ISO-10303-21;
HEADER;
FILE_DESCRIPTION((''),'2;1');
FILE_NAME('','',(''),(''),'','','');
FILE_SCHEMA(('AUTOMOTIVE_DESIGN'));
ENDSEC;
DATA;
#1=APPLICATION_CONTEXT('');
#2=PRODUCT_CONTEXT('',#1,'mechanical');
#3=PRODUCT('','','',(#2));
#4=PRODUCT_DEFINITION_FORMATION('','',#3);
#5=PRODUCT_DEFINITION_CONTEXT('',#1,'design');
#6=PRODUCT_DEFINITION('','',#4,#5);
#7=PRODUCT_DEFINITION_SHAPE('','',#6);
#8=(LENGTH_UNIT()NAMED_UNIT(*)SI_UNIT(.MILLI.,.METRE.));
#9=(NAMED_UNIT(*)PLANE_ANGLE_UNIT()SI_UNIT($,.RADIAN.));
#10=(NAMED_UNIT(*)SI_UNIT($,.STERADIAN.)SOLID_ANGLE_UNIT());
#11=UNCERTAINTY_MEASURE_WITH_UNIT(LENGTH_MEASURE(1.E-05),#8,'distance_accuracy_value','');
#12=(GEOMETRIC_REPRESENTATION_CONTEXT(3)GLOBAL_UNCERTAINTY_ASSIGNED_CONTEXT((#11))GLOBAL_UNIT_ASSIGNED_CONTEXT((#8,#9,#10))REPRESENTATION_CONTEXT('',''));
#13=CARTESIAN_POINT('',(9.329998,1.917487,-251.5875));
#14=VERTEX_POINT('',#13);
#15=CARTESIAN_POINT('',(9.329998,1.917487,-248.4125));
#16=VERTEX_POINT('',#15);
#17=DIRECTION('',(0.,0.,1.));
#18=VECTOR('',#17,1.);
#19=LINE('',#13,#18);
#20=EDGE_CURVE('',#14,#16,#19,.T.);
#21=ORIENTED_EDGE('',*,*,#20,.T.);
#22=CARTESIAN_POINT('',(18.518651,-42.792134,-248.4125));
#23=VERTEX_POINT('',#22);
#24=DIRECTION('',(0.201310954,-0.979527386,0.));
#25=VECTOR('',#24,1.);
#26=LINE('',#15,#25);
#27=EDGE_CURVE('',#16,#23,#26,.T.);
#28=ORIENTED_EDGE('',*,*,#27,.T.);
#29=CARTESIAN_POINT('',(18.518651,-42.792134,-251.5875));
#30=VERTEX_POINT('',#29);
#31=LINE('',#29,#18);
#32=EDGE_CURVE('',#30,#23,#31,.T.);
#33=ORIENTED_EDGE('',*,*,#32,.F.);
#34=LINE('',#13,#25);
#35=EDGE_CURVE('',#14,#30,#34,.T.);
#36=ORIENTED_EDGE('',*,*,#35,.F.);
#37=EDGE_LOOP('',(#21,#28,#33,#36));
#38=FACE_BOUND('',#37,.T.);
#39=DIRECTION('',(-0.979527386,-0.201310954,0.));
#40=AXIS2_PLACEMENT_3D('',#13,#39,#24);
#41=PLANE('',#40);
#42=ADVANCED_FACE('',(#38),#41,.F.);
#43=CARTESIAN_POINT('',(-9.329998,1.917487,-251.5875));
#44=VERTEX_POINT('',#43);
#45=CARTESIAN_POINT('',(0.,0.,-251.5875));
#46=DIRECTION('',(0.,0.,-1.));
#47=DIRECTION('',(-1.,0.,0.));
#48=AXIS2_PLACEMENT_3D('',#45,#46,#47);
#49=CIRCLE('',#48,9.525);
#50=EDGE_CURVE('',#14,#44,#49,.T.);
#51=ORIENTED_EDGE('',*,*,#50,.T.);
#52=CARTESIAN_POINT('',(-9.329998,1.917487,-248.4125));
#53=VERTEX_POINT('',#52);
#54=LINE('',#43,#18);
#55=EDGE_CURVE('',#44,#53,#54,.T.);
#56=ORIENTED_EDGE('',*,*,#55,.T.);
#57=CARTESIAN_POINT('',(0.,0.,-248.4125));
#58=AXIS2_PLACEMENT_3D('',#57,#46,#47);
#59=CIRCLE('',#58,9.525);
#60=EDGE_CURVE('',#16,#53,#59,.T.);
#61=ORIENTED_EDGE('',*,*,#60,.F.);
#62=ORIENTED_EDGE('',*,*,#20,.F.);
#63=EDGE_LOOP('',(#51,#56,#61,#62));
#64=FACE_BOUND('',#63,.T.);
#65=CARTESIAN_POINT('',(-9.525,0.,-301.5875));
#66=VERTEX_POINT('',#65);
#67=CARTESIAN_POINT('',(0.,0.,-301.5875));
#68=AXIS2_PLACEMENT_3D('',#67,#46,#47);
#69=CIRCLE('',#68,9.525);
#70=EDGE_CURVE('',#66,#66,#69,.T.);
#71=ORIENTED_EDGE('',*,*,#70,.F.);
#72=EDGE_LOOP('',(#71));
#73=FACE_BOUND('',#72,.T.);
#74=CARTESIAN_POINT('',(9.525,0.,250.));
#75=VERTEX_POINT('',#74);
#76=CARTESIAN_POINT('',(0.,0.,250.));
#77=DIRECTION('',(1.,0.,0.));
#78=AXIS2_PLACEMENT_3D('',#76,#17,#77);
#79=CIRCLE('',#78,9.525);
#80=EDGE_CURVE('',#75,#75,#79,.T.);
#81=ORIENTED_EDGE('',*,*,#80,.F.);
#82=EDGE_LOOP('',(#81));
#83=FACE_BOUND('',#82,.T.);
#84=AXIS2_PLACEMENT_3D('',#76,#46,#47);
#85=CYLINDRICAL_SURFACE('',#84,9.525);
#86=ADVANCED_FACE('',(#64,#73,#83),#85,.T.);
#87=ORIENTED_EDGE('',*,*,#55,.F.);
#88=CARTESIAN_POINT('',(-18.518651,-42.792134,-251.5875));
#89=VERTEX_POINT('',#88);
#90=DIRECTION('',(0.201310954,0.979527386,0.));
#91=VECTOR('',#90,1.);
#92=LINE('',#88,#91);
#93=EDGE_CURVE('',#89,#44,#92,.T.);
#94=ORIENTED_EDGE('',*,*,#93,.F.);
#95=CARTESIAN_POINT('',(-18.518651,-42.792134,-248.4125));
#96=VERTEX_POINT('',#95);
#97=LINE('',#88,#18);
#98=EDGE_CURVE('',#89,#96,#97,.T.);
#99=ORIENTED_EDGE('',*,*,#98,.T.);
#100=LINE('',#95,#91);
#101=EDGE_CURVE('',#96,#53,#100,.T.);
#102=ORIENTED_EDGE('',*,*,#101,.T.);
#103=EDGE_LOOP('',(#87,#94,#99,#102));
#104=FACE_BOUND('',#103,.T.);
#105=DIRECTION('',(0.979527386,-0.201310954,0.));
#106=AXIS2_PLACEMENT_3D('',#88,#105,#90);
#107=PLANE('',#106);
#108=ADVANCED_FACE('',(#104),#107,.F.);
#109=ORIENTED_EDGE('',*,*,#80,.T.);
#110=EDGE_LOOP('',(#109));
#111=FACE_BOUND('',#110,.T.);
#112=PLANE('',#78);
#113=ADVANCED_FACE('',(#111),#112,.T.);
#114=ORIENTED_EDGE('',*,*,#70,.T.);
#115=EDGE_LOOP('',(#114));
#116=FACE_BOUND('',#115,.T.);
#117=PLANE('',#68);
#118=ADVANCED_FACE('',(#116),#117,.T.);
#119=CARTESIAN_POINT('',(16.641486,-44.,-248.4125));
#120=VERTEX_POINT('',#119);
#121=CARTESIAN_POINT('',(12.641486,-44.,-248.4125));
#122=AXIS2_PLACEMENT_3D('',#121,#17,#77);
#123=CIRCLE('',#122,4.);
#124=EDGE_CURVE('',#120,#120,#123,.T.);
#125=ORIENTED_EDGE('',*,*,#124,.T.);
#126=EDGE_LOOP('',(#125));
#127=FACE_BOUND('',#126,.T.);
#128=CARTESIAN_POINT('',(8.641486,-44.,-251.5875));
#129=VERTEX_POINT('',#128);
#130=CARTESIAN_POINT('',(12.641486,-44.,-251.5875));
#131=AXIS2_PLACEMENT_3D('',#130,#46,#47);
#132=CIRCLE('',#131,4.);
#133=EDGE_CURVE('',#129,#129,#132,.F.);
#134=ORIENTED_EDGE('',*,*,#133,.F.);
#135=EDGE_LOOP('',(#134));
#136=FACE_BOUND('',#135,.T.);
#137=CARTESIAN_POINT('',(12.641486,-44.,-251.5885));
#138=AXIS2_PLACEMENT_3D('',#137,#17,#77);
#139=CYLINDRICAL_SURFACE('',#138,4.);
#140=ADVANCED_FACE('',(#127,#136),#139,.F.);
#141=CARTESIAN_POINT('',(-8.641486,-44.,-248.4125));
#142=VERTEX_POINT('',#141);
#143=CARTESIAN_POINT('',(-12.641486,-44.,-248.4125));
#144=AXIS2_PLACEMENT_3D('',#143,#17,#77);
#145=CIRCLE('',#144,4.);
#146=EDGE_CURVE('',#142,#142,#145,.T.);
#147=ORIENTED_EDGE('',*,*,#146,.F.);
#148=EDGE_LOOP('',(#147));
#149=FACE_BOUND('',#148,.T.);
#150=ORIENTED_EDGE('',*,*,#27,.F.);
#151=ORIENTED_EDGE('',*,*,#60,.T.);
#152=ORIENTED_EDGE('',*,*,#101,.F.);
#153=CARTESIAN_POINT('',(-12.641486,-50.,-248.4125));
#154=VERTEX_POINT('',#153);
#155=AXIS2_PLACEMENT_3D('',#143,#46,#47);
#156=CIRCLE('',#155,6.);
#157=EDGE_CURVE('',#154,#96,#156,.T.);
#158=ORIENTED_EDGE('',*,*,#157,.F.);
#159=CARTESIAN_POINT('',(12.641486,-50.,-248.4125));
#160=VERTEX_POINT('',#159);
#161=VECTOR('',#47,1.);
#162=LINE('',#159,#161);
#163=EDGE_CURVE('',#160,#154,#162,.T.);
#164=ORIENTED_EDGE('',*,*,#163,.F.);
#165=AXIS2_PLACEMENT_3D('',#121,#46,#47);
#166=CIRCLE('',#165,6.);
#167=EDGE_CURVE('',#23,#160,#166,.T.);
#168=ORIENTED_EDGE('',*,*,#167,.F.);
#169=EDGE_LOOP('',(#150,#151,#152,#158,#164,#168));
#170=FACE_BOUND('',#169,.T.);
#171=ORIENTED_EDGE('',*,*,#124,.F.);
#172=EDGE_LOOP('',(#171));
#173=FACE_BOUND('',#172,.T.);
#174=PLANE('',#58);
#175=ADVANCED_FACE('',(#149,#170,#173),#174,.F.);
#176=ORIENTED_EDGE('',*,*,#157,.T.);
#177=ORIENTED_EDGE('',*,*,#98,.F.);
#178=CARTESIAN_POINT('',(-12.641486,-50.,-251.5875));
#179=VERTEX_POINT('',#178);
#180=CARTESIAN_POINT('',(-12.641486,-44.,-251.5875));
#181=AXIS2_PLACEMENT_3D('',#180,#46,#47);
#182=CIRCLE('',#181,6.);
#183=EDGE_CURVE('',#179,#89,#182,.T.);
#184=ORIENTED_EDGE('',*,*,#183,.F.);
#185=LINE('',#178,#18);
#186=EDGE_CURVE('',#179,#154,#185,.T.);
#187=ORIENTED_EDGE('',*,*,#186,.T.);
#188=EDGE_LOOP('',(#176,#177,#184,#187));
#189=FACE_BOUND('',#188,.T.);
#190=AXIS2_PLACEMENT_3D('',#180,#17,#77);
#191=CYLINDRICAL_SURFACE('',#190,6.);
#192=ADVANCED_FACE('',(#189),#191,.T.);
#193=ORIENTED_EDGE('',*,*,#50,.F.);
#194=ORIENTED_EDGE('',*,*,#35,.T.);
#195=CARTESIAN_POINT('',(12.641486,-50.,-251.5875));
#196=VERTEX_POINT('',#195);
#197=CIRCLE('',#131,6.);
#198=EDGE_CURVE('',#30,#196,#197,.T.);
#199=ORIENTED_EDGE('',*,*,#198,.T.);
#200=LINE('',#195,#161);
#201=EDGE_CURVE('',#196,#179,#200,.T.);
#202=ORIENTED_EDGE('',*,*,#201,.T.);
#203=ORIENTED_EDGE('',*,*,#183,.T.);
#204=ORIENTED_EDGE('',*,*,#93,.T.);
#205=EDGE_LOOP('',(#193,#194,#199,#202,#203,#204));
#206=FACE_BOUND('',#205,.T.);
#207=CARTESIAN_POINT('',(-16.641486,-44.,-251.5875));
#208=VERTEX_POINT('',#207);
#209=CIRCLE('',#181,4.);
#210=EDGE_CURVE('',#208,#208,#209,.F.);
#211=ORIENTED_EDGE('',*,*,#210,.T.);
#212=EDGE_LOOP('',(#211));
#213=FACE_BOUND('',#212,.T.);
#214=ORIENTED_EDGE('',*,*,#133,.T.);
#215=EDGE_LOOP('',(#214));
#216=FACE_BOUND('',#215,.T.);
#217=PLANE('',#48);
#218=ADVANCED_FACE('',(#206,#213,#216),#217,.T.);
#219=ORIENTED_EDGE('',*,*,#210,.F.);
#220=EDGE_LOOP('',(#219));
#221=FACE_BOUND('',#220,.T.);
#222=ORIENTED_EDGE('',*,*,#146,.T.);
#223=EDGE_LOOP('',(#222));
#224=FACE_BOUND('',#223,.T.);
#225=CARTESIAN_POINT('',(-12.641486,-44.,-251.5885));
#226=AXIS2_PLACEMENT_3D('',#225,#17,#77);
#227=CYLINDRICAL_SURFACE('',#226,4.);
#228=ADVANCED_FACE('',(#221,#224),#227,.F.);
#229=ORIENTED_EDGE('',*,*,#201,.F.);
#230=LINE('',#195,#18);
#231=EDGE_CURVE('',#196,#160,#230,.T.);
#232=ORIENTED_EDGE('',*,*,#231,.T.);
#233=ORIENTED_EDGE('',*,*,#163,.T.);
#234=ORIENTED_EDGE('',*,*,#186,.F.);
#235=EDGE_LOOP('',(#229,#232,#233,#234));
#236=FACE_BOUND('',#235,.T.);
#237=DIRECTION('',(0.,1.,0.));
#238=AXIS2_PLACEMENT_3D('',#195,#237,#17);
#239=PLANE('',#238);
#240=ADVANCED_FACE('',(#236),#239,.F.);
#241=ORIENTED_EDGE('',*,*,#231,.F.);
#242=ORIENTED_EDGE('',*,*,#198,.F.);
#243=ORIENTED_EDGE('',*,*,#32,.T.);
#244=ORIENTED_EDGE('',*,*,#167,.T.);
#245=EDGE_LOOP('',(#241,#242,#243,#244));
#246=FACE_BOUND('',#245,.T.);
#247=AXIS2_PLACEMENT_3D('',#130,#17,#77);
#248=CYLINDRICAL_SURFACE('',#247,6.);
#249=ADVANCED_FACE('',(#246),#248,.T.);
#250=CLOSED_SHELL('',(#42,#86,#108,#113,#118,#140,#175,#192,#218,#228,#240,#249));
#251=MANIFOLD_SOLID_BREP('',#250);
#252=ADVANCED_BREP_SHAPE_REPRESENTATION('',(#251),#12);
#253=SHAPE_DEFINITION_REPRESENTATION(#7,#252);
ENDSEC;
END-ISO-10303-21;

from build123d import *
from build123d.topology import SkipClean

# Parameters (mm, degrees)
SKETCH1_R           = 9.525
BOSS_EXTRUDE1_DEPTH = 250
BOSS_EXTRUDE2_DEPTH = 1.5875
CUT_EXTRUDE1_REACH  = 503.261
SKETCH3_R           = 4
SKETCH4_R           = 9.525
BOSS_EXTRUDE3_DEPTH = 50


with BuildPart() as part:
    # Sketch1 → Boss-Extrude1 (new, symmetric)
    with BuildSketch(Plane.XY):
        Circle(SKETCH1_R)
    extrude(amount=BOSS_EXTRUDE1_DEPTH, both=True)

    # Sketch2 → Boss-Extrude2 (add, symmetric)
    with SkipClean():  # the faces are left unmerged after this step: merging them gives an invalid solid
        with BuildSketch(Plane(origin=(0, 0, -250), x_dir=(-1, 0, 0), z_dir=(0, 0, -1))):
            with BuildLine():
                Line((-9.32999835, 1.91748684), (-18.518650577, -42.792134274))
                ThreePointArc((-18.518650577, -42.792134274), (-17.291604236, -47.791622716), (-12.641486262, -50))
                Line((-12.641486262, -50), (12.641486262, -50))
                ThreePointArc((12.641486262, -50), (17.291604236, -47.791622716), (18.518650577, -42.792134274))
                Line((18.518650577, -42.792134274), (9.32999835, 1.91748684))
                ThreePointArc((9.32999835, 1.91748684), (0, 9.525), (-9.32999835, 1.91748684))
            make_face()
        extrude(amount=BOSS_EXTRUDE2_DEPTH, both=True)
    add(part.part.scale(1), mode=Mode.REPLACE)  # the faces are merged on a copy

    # Sketch3 → Cut-Extrude1 (cut, up to next)
    with BuildSketch(Plane.XY.offset(-248.4125), mode=Mode.PRIVATE) as cut_extrude1_sk1:
        with Locations((-12.641486262, -44)):
            Circle(SKETCH3_R)
    cut_extrude1_tool1 = extrude(cut_extrude1_sk1.sketch, amount=-CUT_EXTRUDE1_REACH, mode=Mode.PRIVATE) & part.part
    # Sketch3 → Cut-Extrude1 (cut, up to next)
    with BuildSketch(Plane.XY.offset(-248.4125), mode=Mode.PRIVATE) as cut_extrude1_sk2:
        with Locations((12.641486262, -44)):
            Circle(SKETCH3_R)
    cut_extrude1_tool2 = extrude(cut_extrude1_sk2.sketch, amount=-CUT_EXTRUDE1_REACH, mode=Mode.PRIVATE) & part.part
    add(cut_extrude1_tool1.solids().sort_by_distance((-12.641486, -44, -248.4125))[0], mode=Mode.SUBTRACT)
    add(cut_extrude1_tool2.solids().sort_by_distance((12.641486, -44, -248.4125))[0], mode=Mode.SUBTRACT)

    # Sketch4 → Boss-Extrude3 (add)
    with BuildSketch(Plane(origin=(0, 0, -251.5875), x_dir=(-1, 0, 0), z_dir=(0, 0, -1))):
        Circle(SKETCH4_R)
    extrude(amount=BOSS_EXTRUDE3_DEPTH)


solid = part.part
